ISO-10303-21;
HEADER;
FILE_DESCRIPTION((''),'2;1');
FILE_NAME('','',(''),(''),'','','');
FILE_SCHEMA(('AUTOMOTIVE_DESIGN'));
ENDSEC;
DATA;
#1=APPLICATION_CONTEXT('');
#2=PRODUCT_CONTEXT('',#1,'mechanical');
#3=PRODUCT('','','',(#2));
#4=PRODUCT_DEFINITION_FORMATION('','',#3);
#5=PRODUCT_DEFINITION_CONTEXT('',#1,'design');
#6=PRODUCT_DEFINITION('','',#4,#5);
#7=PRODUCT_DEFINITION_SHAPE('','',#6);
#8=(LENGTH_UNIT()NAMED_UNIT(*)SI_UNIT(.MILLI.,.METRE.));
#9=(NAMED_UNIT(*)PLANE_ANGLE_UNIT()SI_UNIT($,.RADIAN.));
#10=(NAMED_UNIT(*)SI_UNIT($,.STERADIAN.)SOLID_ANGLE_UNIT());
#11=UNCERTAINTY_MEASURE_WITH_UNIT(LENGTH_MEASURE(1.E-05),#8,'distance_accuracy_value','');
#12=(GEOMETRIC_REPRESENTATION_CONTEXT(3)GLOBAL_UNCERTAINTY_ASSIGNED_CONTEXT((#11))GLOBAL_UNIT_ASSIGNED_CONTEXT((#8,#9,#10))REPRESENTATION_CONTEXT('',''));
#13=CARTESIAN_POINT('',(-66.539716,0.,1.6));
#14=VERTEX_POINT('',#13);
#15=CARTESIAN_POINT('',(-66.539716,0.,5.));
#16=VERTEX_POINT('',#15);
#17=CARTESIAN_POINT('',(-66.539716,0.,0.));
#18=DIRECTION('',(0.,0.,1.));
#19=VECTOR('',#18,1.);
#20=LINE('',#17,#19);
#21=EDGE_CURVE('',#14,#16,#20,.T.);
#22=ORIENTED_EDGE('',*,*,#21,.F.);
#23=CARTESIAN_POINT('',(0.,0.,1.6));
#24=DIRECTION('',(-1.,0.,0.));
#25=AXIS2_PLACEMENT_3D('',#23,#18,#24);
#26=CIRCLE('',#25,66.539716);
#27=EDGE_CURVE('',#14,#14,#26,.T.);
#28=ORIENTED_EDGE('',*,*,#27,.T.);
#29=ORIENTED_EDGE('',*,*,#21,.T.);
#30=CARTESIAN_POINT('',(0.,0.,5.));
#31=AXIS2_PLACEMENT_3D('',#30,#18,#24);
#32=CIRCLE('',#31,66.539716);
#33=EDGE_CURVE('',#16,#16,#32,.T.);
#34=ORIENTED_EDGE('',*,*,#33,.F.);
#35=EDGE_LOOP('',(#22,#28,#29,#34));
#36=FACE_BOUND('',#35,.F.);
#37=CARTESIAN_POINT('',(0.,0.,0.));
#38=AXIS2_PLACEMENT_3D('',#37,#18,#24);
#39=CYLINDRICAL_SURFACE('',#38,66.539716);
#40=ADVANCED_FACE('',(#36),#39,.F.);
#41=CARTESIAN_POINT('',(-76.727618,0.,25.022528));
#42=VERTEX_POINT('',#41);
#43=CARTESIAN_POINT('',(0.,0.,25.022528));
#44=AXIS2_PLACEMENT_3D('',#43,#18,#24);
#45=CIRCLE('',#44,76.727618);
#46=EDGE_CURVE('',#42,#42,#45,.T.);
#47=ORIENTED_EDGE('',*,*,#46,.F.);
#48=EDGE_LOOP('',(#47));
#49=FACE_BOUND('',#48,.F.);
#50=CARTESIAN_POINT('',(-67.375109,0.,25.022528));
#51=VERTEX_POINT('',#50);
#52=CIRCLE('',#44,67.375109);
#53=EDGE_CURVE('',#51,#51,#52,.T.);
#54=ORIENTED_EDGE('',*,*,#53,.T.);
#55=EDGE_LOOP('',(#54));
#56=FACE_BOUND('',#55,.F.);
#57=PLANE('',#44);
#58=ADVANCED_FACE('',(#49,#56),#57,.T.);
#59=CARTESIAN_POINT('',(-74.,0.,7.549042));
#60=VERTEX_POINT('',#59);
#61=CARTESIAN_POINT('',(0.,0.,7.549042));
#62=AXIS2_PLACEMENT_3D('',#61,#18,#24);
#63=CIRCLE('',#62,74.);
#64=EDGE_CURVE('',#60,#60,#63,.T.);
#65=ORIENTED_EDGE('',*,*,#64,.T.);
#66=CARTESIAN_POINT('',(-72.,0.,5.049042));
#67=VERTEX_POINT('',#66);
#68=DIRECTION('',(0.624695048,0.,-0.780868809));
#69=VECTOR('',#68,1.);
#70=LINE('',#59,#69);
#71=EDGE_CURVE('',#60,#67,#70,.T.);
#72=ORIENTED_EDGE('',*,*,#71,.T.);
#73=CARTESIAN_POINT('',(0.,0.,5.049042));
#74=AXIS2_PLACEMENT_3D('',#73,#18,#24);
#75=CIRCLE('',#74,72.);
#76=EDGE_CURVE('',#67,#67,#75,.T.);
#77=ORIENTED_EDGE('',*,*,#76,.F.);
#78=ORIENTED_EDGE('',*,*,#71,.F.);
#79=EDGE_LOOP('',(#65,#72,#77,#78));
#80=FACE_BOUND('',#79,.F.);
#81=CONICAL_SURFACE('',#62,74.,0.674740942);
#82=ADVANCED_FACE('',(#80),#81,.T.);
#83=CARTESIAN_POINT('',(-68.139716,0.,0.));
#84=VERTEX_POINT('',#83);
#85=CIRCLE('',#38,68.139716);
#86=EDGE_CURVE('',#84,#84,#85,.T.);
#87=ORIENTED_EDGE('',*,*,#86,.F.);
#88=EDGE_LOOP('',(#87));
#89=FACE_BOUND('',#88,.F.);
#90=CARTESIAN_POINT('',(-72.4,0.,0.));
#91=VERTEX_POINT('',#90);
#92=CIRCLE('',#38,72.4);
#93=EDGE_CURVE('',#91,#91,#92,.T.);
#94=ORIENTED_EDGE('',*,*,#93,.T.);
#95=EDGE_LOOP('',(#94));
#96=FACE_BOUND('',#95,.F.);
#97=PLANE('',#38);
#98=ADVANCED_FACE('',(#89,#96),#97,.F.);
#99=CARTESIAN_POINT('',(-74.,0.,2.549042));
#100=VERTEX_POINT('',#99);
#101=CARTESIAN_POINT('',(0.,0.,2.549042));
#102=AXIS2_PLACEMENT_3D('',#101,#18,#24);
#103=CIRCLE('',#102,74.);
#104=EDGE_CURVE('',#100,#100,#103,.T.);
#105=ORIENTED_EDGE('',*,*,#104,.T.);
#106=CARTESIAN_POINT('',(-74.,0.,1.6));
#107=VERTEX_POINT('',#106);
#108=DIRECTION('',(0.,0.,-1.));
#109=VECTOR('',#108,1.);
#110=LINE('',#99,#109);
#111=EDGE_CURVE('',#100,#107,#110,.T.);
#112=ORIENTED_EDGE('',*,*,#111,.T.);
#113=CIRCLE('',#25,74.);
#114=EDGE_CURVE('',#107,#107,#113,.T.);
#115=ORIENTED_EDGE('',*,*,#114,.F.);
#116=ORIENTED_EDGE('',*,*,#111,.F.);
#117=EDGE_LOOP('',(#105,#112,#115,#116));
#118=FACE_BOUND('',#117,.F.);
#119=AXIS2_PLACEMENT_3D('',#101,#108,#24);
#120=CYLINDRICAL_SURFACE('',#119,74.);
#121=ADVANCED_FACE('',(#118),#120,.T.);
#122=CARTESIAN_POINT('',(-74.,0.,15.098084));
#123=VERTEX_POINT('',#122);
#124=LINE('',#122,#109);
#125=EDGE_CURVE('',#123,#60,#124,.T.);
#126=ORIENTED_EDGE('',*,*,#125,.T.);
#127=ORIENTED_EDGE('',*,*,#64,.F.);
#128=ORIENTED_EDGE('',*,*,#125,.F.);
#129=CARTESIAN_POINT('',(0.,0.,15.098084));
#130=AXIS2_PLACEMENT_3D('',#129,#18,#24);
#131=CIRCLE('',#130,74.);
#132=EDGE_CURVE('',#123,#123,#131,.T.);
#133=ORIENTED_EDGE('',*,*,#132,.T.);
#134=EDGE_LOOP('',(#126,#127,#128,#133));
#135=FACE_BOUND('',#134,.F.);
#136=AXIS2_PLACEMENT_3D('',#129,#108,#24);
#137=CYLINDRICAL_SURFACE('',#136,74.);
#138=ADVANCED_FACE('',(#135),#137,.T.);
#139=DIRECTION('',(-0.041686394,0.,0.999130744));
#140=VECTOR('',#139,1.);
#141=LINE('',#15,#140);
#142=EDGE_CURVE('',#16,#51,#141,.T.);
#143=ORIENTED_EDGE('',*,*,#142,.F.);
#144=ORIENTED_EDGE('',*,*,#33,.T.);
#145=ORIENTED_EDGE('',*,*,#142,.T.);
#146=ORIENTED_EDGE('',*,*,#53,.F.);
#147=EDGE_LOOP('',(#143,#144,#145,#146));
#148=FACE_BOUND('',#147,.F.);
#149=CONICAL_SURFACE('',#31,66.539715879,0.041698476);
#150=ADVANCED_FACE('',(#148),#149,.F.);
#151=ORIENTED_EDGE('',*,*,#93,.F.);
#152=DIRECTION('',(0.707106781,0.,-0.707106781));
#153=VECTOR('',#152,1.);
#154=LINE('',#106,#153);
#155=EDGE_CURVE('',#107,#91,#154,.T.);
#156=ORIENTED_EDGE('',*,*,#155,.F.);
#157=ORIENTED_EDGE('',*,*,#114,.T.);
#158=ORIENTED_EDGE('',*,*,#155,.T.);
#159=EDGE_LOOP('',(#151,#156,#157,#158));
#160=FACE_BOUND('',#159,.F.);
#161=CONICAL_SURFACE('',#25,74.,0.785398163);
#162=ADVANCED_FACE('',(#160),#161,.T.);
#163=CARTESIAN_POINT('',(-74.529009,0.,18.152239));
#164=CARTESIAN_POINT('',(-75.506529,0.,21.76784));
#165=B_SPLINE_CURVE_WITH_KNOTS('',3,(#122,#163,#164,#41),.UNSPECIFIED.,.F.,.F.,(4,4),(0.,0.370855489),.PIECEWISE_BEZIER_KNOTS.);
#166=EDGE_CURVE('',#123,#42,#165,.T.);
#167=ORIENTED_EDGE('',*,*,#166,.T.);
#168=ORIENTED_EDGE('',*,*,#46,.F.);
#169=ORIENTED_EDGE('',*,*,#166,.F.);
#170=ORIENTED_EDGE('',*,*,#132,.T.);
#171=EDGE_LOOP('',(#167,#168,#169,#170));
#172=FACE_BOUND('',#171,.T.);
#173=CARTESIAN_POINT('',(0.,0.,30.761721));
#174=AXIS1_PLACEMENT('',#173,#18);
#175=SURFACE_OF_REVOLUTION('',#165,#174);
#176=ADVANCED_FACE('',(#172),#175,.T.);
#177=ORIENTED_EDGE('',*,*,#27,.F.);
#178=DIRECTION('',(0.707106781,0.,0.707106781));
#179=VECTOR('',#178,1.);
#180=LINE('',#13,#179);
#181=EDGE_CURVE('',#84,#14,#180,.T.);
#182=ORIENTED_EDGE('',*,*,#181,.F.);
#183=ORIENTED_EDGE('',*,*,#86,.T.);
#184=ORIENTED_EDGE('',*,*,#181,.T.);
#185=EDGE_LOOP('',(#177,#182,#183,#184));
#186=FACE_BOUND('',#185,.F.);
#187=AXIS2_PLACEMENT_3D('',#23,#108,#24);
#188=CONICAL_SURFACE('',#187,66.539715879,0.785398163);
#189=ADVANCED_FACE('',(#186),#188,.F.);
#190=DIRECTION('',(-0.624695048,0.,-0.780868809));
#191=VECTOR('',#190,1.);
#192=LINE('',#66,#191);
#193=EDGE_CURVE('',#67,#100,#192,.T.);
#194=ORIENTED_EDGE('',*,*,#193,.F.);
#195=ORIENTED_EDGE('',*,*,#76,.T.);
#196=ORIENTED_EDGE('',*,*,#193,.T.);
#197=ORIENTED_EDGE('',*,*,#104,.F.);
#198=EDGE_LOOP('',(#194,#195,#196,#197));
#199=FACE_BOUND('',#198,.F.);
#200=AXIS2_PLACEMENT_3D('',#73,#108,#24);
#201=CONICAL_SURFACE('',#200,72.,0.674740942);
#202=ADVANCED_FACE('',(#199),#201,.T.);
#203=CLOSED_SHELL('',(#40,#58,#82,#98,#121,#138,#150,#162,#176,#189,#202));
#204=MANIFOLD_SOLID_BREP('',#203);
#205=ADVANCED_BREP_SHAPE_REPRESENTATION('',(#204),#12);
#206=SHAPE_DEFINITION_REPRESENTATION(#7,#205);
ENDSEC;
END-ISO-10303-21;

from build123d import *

# Parameters (mm, degrees)
F2_SIZE = 1.6


# Not quite as in the source:
# - a feature names something its author has since deleted; it is built from what else it names


with BuildPart() as f1:
    # F0 (on Front) → F1 (revolve)
    with BuildSketch(Plane.XZ):
        with BuildLine():
            Line((-74, 2.5490417611), (-74, 0))
            Line((-74, 0), (-67, 0))
            Line((-67, 0), (-66.5397158787, 0))
            Line((-66.5397158787, 0), (-66.5397158787, 5))
            Line((-66.5397158787, 5), (-67.375109026, 25.0225278729))
            Line((-67.375109026, 25.0225278729), (-76.7276180841, 25.0225278729))
            add(Edge.make_bspline(
                [(-74, 15.0980835222), (-74.5290090501, 18.1522390297), (-75.5065289435, 21.7678404443), (-76.7276180841, 25.0225278729)],
                knots=[0, 0, 0, 0, 0.3708554891, 0.3708554891, 0.3708554891, 0.3708554891], degree=3))
            Line((-74, 15.0980835222), (-74, 7.5490417611))
            Line((-74, 7.5490417611), (-72, 5.0490417611))
            Line((-72, 5.0490417611), (-74, 2.5490417611))
        make_face()
    revolve(axis=Axis((0, 0, 30.7617206126), (0, 0, 1)))

    # F2
    f2_edges = [f1.edges().sort_by_distance(p)[0] for p in [
        (74, 0, 0),
        (66.539716, 0, 0),
    ]]
    chamfer(f2_edges, length=F2_SIZE)


solid = f1.part
